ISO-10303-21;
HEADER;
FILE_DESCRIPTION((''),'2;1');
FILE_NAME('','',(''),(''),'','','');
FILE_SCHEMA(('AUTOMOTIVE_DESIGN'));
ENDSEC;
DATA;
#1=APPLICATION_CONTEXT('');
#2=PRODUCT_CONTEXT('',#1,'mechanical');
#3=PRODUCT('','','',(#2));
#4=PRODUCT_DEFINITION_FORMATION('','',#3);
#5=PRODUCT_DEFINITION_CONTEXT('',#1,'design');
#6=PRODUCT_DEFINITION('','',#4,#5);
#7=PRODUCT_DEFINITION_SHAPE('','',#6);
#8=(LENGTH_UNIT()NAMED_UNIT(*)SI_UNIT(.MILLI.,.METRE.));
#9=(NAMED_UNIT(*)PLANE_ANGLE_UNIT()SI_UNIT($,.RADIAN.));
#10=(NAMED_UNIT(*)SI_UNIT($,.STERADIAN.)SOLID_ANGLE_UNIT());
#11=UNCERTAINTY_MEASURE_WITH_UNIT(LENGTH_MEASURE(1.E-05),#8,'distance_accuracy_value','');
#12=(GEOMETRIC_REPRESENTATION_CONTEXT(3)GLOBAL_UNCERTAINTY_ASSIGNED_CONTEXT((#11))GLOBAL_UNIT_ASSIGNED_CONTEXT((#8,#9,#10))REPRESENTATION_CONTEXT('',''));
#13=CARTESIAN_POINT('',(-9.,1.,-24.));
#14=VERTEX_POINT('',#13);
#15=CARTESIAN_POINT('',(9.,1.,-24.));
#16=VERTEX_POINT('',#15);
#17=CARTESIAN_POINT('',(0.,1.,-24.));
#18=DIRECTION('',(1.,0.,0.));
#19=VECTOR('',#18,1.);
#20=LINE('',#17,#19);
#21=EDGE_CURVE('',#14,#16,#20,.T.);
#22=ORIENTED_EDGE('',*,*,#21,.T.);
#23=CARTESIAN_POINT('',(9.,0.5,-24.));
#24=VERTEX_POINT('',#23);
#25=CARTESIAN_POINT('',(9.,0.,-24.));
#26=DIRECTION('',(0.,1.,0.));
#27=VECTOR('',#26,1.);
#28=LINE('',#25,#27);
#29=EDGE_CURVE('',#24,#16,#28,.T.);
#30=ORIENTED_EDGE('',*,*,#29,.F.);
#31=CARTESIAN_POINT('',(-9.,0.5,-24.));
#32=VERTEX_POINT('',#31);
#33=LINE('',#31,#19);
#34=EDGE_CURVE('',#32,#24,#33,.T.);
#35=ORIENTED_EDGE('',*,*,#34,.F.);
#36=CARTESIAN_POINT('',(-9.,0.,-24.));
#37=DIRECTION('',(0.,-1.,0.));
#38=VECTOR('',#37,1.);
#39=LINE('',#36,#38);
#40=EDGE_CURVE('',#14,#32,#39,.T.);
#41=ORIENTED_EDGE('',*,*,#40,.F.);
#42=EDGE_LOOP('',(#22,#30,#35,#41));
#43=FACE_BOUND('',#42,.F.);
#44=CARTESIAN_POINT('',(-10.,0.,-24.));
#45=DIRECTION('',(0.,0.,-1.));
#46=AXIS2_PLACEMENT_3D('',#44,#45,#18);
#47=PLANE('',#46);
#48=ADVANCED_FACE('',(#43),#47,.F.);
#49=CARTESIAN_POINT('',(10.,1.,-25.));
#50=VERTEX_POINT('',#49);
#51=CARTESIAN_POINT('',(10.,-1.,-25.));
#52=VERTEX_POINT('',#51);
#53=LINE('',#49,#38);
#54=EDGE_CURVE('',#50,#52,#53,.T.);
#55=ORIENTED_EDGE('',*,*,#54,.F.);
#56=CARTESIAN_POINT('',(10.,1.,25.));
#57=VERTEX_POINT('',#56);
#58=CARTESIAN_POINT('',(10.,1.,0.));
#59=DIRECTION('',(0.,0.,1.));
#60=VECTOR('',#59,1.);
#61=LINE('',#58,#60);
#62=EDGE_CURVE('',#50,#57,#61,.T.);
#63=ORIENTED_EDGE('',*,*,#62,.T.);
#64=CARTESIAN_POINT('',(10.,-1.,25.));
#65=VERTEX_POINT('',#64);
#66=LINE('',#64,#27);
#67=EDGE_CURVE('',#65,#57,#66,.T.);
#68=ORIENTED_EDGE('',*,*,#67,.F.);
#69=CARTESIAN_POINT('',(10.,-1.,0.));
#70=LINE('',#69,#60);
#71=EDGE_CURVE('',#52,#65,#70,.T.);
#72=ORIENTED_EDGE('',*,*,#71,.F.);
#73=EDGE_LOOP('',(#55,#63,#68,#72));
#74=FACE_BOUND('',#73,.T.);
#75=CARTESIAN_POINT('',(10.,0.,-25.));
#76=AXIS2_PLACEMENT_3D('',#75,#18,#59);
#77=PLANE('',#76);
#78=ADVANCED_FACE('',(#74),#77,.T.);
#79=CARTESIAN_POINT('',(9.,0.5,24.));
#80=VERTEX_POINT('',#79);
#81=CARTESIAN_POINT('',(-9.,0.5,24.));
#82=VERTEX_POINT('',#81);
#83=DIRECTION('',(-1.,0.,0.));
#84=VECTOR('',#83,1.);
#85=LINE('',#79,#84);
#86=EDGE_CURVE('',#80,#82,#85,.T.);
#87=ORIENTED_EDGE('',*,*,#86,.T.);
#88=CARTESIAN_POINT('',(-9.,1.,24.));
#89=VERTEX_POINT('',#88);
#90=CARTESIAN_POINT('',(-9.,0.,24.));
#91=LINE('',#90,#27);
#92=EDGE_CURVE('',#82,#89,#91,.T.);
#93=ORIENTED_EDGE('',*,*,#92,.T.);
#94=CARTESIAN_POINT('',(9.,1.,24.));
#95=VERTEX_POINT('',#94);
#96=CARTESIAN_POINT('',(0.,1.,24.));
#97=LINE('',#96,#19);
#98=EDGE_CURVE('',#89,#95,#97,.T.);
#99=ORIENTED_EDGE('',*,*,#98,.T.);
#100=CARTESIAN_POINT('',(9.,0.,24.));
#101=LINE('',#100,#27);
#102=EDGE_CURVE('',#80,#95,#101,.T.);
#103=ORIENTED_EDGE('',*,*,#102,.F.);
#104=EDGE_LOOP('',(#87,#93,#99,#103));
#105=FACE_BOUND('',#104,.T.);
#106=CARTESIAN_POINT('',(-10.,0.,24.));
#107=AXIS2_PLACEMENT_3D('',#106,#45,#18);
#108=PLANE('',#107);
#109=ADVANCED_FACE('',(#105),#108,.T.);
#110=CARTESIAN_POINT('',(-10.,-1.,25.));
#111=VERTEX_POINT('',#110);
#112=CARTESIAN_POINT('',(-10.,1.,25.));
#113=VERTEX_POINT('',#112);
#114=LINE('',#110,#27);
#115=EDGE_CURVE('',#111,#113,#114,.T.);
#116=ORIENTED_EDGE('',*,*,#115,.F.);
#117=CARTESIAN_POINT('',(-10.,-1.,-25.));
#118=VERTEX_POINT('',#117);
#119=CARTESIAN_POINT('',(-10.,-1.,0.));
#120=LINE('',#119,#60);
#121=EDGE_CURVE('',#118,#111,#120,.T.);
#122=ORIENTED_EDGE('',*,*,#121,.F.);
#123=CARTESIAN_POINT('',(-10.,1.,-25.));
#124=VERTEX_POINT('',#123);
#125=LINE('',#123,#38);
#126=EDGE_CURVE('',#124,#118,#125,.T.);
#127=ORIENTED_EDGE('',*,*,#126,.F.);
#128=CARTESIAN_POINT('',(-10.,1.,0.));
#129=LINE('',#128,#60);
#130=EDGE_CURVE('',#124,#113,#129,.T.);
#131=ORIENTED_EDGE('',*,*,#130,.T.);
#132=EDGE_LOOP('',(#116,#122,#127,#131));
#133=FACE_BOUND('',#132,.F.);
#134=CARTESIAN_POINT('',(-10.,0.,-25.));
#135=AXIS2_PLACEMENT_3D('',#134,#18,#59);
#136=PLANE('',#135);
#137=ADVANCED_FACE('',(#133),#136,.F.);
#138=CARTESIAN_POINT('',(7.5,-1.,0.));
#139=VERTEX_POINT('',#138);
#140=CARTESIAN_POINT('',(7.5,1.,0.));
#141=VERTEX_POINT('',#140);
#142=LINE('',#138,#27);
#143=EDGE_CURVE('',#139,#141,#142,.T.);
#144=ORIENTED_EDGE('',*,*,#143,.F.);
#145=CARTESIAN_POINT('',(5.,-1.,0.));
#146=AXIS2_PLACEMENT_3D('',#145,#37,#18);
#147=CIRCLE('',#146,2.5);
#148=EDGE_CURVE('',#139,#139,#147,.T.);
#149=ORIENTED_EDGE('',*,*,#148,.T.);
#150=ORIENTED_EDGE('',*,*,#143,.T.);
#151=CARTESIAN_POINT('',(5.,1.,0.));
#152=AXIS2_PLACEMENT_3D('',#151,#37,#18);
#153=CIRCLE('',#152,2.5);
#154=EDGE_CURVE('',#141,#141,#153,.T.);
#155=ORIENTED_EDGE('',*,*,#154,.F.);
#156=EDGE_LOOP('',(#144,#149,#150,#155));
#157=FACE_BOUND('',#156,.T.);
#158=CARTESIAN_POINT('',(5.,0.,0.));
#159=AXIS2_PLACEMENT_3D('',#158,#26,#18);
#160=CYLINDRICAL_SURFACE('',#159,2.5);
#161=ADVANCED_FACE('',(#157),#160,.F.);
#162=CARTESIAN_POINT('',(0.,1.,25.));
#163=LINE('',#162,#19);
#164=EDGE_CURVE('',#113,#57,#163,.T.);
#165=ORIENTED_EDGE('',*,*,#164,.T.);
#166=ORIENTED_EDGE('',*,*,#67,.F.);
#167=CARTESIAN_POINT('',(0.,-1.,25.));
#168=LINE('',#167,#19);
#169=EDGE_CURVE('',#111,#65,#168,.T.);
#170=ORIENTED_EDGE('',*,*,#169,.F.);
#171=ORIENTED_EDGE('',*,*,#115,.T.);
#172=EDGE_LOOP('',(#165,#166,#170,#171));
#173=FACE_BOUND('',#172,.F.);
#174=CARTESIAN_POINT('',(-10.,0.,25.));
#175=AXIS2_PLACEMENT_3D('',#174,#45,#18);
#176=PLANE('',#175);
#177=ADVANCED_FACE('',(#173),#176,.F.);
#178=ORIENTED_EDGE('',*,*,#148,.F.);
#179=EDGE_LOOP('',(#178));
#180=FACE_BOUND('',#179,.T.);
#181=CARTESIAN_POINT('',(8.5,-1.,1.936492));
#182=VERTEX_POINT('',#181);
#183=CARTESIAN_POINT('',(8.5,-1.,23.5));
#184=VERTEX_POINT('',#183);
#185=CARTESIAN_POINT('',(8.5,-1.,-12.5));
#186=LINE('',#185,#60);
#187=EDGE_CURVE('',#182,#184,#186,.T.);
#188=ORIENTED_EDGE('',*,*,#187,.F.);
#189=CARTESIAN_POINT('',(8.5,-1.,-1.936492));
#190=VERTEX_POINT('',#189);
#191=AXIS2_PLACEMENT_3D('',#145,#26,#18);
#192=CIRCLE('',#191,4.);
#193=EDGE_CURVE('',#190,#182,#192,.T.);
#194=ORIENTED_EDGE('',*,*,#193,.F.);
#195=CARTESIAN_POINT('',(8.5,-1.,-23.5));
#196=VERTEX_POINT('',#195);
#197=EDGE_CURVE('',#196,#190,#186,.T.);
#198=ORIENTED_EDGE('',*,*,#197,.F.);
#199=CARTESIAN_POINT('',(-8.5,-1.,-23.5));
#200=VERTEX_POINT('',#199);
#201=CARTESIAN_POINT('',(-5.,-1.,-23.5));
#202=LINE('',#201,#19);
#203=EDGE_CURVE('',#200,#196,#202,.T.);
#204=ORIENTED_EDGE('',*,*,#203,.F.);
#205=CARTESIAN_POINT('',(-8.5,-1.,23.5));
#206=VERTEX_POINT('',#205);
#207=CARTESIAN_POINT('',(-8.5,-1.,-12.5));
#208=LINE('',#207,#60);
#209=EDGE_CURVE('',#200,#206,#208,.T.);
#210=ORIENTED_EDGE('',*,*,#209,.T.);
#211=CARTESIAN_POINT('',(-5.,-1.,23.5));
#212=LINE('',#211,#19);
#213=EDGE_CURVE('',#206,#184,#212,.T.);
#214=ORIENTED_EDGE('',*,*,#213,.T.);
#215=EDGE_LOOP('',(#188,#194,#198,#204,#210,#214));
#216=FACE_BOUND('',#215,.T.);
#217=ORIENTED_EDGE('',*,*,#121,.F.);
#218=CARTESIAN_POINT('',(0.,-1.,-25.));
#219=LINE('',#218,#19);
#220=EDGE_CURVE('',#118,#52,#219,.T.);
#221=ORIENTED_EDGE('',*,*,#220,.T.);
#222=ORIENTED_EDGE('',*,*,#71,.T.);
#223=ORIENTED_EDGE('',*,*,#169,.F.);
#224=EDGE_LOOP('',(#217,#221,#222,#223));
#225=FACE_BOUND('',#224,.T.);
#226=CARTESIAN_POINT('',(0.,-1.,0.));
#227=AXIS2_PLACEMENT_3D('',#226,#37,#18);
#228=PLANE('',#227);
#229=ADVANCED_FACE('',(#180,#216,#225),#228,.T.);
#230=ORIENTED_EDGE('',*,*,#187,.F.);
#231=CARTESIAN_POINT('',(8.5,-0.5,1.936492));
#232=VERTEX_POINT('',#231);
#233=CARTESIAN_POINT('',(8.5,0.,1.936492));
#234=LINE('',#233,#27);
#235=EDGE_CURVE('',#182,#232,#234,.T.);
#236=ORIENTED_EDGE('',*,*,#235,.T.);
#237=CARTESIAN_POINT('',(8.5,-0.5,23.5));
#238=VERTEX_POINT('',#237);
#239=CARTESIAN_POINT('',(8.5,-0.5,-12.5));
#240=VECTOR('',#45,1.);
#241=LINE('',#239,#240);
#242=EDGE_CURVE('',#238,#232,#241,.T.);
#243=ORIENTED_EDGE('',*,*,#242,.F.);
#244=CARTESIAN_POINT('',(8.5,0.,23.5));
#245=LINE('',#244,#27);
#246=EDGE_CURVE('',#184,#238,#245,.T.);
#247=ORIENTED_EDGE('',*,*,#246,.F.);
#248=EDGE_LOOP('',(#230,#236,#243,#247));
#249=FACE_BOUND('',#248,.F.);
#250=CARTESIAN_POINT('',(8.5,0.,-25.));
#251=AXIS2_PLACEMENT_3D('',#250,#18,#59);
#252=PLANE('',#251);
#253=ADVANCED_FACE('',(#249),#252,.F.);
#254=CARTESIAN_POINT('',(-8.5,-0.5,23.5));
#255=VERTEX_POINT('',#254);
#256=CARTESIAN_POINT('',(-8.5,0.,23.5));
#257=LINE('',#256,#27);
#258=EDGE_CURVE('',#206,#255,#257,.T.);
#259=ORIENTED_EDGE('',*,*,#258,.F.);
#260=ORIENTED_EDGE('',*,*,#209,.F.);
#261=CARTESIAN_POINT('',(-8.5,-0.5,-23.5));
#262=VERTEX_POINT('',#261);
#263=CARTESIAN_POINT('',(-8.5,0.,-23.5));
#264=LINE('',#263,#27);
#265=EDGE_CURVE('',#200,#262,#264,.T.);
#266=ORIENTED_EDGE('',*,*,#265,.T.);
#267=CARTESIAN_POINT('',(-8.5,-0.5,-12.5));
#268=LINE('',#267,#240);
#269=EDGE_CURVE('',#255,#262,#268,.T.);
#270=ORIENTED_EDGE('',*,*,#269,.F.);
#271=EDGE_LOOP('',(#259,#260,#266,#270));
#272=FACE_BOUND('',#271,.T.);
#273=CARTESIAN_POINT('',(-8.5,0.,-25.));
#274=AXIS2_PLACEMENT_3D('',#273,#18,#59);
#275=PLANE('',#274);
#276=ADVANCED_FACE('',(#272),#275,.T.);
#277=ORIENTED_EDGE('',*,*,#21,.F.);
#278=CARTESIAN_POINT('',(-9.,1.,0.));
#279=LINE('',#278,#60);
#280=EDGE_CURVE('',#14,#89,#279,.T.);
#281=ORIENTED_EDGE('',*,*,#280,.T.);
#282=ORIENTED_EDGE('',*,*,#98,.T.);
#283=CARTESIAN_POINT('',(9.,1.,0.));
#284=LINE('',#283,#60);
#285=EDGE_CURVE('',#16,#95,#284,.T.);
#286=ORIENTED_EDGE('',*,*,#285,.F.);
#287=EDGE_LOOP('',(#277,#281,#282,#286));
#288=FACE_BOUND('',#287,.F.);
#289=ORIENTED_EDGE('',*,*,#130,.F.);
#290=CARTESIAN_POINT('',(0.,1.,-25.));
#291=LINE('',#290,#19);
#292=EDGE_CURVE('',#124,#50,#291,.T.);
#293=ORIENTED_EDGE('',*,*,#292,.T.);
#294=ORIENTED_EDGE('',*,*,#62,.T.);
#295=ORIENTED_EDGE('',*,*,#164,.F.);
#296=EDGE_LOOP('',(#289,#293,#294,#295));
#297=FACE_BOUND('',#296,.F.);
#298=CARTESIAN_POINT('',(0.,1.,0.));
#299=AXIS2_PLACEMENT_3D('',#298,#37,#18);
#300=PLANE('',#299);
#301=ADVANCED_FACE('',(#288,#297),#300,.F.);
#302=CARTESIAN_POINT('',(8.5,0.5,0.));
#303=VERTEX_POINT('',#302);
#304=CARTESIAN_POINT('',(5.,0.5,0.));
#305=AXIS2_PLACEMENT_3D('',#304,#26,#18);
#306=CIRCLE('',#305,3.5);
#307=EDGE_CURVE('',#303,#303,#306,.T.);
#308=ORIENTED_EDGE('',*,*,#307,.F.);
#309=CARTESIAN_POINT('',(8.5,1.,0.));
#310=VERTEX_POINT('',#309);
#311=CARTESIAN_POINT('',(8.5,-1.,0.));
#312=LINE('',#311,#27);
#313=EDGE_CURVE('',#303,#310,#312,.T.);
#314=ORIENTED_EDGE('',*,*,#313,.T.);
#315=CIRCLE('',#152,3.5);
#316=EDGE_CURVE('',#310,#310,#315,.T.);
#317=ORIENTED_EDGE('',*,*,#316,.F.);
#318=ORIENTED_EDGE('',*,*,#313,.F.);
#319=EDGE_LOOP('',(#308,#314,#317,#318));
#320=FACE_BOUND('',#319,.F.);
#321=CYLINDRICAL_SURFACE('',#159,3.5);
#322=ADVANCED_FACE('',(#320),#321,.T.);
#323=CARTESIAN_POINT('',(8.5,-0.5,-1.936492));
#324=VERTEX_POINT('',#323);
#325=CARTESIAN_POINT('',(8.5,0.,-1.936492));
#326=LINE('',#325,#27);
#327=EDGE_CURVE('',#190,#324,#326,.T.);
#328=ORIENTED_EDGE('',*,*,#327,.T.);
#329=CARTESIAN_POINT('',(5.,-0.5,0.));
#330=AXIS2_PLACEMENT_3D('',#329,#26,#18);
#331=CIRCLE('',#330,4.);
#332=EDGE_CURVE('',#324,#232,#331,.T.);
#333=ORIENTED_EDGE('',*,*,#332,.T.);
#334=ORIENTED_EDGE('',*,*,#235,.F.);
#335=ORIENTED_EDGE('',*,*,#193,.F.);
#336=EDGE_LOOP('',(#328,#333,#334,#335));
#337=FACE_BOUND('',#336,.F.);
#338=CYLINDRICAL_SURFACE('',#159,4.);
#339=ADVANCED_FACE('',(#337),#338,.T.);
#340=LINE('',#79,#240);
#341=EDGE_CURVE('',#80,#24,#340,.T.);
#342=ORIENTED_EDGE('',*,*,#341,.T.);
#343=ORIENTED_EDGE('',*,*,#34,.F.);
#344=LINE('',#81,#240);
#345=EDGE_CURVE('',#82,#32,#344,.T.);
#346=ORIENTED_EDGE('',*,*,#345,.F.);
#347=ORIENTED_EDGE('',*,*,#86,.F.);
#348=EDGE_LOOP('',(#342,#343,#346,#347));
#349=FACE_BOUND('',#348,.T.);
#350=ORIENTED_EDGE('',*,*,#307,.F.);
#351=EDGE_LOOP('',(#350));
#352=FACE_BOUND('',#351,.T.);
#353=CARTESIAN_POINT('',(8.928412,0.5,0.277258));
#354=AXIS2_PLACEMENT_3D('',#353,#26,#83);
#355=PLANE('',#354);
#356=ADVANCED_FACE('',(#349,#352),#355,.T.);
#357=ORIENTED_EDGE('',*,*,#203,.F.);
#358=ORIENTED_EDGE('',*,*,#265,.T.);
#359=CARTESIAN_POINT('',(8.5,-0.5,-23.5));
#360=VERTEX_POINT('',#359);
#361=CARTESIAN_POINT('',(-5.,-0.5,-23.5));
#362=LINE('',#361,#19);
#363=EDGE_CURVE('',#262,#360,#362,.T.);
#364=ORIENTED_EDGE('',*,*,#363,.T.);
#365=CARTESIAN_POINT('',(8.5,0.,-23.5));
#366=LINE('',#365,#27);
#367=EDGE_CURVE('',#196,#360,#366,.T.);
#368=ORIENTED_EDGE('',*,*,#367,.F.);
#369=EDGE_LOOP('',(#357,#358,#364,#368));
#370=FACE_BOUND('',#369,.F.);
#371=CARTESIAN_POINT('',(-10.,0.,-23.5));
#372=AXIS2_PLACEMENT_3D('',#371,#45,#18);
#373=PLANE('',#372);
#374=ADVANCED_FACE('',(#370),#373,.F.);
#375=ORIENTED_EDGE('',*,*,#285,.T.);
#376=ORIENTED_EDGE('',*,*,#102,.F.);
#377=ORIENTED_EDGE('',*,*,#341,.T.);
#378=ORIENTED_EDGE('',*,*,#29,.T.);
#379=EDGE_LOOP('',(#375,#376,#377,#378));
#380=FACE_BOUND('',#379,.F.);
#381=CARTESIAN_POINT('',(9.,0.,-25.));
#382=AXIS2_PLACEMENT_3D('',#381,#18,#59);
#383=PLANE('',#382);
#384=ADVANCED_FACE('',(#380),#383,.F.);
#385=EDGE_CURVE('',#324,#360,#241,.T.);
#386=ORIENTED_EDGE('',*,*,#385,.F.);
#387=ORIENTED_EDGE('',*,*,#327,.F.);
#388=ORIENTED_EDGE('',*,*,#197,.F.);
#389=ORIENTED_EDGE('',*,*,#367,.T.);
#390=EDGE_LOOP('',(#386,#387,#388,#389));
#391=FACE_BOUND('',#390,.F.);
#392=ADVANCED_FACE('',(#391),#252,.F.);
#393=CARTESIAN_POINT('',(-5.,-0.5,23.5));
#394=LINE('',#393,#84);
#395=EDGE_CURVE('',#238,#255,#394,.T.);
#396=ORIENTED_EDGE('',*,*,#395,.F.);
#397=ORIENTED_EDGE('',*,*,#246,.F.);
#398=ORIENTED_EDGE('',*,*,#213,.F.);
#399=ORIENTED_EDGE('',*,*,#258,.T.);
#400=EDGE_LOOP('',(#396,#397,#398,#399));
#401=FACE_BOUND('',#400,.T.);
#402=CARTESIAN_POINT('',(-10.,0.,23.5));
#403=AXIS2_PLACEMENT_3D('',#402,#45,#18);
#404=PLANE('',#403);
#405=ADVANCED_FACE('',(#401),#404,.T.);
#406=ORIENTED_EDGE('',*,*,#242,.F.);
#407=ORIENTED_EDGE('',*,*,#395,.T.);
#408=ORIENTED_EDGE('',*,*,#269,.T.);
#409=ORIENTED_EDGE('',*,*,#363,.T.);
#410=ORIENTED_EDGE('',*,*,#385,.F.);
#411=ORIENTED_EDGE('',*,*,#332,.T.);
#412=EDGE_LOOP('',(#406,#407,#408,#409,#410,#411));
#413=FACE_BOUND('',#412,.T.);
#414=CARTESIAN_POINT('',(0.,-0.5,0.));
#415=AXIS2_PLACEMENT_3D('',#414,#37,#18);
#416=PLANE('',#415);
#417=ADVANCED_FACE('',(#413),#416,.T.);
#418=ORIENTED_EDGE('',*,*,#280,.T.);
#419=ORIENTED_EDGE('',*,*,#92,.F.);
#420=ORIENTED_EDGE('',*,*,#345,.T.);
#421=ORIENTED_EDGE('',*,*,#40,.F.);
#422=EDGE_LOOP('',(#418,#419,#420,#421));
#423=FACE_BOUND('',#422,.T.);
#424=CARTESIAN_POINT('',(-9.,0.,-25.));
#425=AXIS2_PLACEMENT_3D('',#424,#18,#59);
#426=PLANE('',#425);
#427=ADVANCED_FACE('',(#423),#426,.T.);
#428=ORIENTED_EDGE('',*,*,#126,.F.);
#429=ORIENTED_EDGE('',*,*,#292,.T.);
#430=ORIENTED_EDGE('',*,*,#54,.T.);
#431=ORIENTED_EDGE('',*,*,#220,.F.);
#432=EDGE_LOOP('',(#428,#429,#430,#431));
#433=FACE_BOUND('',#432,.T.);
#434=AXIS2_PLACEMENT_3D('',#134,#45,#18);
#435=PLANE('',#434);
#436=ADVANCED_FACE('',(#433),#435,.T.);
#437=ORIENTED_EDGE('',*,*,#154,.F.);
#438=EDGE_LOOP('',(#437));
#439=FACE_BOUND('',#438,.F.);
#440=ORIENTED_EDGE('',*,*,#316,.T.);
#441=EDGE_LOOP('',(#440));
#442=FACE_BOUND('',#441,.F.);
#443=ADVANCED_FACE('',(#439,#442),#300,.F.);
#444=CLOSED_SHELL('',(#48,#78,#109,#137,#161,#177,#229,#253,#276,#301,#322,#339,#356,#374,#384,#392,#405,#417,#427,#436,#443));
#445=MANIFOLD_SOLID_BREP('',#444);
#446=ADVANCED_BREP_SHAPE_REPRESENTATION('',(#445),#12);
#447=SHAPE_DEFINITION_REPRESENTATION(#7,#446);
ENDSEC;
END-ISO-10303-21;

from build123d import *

# Parameters (mm, degrees)
F0_W         = 20
F0_H         = 50
F0_R         = 2.5
F1_DEPTH     = 1
F2_T         = -1.5
F3_T         = 1
F3_T3_DEPTH  = 23.5635083269
F3_T5_DEPTH  = 2.5
F3_T7_DEPTH  = 23.5635083269
F3_T9_DEPTH  = 19
F3_T11_DEPTH = 49
F3_T14_ANGLE = 302.0899512573


# Not quite as in the source:
# - a shell that OpenCascade refuses in one call is made with other operations: the cavity is built on its own and cut out


with BuildPart() as f1:
    # F0 (on Front) → F1 (new body, symmetric)
    with BuildSketch(Plane.XZ):
        Rectangle(F0_W, F0_H)
        with Locations((5, 0)):
            Circle(F0_R, mode=Mode.SUBTRACT)
    extrude(amount=F1_DEPTH, both=True)

    # F2
    f2_openings = [f1.faces().sort_by_distance(p)[0] for p in [
        (-0.100141, -1, 0),
    ]]
    offset(amount=F2_T, openings=f2_openings, kind=Kind.INTERSECTION)

    # F3: shell of thickness 1, made by hand


with BuildPart() as f3_core1:
    # F3_t2: copy of F1
    add(f1.part)

    # the walls: a layer under each face that stays
    f3_faces = [f3_core1.faces().sort_by_distance(p)[0] for p in [
        (10, 0, 0),
        (0, 0, -25),
        (-10, 0, 0),
        (0, 0, 25),
        (2.5, 0, 0),
        (-8.5714285714, -1, -21.4285714286),
        (8.5, -0.75, 12.7182458366),
        (8.5, -0.75, -12.7182458366),
        (0, -0.75, -23.5),
        (-8.5, -0.75, 0),
        (1, -0.75, 0),
        (0, -0.75, 23.5),
        (0, -0.5, 0),
    ]]
    thicken(f3_faces, amount=-F3_T, mode=Mode.SUBTRACT)

    # F3_s4 → F3_t3 (cut)
    with BuildSketch(Plane.XY.offset(0.9364916731)):
        Polygon((8.49, -0.51), (9.5, -0.5), (9.5, 0.5), (8.5, 0.5), align=None)
    extrude(amount=F3_T3_DEPTH, mode=Mode.SUBTRACT)

    # F3_s6 → F3_t5 (cut)
    with BuildSketch(Plane.XZ.offset(-0.5)):
        Polygon((8.49, 23.49), (9.5, 23.5), (9.5, 24.5), (8.5, 24.5), align=None)
        Polygon((8.49875, 1.9413329023), (9.5, 1.9364916731), (9.5, -1.9364916731), (7.625, 1.4523687548), align=None)
        Polygon((8.49, -23.49), (9.5, -23.5), (9.5, -24.5), (8.5, -24.5), align=None)
        Polygon((8.49875, -1.9413329023), (9.5, -1.9364916731), (9.5, 1.9364916731), (7.625, -1.4523687548), align=None)
        Polygon((-8.49, -23.49), (-8.5, -24.5), (-9.5, -24.5), (-9.5, -23.5), align=None)
        Polygon((-8.49, 23.49), (-9.5, 23.5), (-9.5, 24.5), (-8.5, 24.5), align=None)
    extrude(amount=F3_T5_DEPTH, mode=Mode.SUBTRACT)

    # F3_s8 → F3_t7 (cut)
    with BuildSketch(Plane.XY.offset(-24.5)):
        Polygon((8.49, -0.51), (9.5, -0.5), (9.5, 0.5), (8.5, 0.5), align=None)
    extrude(amount=F3_T7_DEPTH, mode=Mode.SUBTRACT)

    # F3_s10 → F3_t9 (cut)
    with BuildSketch(Plane.YZ.offset(-9.5)):
        Polygon((-0.51, -23.49), (-0.5, -24.5), (0.5, -24.5), (0.5, -23.5), align=None)
        Polygon((-0.51, 23.49), (-0.5, 24.5), (0.5, 24.5), (0.5, 23.5), align=None)
    extrude(amount=F3_T9_DEPTH, mode=Mode.SUBTRACT)

    # F3_s12 → F3_t11 (cut)
    with BuildSketch(Plane.XY.offset(-24.5)):
        Polygon((-8.49, -0.51), (-9.5, -0.5), (-9.5, 0.5), (-8.5, 0.5), align=None)
    extrude(amount=F3_T11_DEPTH, mode=Mode.SUBTRACT)

    # F3_s13 → F3_t14 (revolve, cut)
    with BuildSketch(Plane(origin=(1.171875, 0, 2.1180377675), x_dir=(0, 1, 0), z_dir=(0.4841229183, 0, 0.875))):
        Polygon((-0.51, -8.385), (-0.5, -7.375), (0.5, -7.375), (0.5, -8.375), align=None)
    revolve(axis=Axis((5, -0.5, 0), (0, 1, 0)), revolution_arc=F3_T14_ANGLE, mode=Mode.SUBTRACT)


with BuildPart() as f1_1:
    add(f1.part)

    # what is left inside the walls is the cavity
    f3_cavity = [f3_core1.part.solids().sort_by_distance(p)[0] for p in [
        (0, 0.99, -8),
    ]]
    add(f3_cavity, mode=Mode.SUBTRACT)


solid = f1_1.part
